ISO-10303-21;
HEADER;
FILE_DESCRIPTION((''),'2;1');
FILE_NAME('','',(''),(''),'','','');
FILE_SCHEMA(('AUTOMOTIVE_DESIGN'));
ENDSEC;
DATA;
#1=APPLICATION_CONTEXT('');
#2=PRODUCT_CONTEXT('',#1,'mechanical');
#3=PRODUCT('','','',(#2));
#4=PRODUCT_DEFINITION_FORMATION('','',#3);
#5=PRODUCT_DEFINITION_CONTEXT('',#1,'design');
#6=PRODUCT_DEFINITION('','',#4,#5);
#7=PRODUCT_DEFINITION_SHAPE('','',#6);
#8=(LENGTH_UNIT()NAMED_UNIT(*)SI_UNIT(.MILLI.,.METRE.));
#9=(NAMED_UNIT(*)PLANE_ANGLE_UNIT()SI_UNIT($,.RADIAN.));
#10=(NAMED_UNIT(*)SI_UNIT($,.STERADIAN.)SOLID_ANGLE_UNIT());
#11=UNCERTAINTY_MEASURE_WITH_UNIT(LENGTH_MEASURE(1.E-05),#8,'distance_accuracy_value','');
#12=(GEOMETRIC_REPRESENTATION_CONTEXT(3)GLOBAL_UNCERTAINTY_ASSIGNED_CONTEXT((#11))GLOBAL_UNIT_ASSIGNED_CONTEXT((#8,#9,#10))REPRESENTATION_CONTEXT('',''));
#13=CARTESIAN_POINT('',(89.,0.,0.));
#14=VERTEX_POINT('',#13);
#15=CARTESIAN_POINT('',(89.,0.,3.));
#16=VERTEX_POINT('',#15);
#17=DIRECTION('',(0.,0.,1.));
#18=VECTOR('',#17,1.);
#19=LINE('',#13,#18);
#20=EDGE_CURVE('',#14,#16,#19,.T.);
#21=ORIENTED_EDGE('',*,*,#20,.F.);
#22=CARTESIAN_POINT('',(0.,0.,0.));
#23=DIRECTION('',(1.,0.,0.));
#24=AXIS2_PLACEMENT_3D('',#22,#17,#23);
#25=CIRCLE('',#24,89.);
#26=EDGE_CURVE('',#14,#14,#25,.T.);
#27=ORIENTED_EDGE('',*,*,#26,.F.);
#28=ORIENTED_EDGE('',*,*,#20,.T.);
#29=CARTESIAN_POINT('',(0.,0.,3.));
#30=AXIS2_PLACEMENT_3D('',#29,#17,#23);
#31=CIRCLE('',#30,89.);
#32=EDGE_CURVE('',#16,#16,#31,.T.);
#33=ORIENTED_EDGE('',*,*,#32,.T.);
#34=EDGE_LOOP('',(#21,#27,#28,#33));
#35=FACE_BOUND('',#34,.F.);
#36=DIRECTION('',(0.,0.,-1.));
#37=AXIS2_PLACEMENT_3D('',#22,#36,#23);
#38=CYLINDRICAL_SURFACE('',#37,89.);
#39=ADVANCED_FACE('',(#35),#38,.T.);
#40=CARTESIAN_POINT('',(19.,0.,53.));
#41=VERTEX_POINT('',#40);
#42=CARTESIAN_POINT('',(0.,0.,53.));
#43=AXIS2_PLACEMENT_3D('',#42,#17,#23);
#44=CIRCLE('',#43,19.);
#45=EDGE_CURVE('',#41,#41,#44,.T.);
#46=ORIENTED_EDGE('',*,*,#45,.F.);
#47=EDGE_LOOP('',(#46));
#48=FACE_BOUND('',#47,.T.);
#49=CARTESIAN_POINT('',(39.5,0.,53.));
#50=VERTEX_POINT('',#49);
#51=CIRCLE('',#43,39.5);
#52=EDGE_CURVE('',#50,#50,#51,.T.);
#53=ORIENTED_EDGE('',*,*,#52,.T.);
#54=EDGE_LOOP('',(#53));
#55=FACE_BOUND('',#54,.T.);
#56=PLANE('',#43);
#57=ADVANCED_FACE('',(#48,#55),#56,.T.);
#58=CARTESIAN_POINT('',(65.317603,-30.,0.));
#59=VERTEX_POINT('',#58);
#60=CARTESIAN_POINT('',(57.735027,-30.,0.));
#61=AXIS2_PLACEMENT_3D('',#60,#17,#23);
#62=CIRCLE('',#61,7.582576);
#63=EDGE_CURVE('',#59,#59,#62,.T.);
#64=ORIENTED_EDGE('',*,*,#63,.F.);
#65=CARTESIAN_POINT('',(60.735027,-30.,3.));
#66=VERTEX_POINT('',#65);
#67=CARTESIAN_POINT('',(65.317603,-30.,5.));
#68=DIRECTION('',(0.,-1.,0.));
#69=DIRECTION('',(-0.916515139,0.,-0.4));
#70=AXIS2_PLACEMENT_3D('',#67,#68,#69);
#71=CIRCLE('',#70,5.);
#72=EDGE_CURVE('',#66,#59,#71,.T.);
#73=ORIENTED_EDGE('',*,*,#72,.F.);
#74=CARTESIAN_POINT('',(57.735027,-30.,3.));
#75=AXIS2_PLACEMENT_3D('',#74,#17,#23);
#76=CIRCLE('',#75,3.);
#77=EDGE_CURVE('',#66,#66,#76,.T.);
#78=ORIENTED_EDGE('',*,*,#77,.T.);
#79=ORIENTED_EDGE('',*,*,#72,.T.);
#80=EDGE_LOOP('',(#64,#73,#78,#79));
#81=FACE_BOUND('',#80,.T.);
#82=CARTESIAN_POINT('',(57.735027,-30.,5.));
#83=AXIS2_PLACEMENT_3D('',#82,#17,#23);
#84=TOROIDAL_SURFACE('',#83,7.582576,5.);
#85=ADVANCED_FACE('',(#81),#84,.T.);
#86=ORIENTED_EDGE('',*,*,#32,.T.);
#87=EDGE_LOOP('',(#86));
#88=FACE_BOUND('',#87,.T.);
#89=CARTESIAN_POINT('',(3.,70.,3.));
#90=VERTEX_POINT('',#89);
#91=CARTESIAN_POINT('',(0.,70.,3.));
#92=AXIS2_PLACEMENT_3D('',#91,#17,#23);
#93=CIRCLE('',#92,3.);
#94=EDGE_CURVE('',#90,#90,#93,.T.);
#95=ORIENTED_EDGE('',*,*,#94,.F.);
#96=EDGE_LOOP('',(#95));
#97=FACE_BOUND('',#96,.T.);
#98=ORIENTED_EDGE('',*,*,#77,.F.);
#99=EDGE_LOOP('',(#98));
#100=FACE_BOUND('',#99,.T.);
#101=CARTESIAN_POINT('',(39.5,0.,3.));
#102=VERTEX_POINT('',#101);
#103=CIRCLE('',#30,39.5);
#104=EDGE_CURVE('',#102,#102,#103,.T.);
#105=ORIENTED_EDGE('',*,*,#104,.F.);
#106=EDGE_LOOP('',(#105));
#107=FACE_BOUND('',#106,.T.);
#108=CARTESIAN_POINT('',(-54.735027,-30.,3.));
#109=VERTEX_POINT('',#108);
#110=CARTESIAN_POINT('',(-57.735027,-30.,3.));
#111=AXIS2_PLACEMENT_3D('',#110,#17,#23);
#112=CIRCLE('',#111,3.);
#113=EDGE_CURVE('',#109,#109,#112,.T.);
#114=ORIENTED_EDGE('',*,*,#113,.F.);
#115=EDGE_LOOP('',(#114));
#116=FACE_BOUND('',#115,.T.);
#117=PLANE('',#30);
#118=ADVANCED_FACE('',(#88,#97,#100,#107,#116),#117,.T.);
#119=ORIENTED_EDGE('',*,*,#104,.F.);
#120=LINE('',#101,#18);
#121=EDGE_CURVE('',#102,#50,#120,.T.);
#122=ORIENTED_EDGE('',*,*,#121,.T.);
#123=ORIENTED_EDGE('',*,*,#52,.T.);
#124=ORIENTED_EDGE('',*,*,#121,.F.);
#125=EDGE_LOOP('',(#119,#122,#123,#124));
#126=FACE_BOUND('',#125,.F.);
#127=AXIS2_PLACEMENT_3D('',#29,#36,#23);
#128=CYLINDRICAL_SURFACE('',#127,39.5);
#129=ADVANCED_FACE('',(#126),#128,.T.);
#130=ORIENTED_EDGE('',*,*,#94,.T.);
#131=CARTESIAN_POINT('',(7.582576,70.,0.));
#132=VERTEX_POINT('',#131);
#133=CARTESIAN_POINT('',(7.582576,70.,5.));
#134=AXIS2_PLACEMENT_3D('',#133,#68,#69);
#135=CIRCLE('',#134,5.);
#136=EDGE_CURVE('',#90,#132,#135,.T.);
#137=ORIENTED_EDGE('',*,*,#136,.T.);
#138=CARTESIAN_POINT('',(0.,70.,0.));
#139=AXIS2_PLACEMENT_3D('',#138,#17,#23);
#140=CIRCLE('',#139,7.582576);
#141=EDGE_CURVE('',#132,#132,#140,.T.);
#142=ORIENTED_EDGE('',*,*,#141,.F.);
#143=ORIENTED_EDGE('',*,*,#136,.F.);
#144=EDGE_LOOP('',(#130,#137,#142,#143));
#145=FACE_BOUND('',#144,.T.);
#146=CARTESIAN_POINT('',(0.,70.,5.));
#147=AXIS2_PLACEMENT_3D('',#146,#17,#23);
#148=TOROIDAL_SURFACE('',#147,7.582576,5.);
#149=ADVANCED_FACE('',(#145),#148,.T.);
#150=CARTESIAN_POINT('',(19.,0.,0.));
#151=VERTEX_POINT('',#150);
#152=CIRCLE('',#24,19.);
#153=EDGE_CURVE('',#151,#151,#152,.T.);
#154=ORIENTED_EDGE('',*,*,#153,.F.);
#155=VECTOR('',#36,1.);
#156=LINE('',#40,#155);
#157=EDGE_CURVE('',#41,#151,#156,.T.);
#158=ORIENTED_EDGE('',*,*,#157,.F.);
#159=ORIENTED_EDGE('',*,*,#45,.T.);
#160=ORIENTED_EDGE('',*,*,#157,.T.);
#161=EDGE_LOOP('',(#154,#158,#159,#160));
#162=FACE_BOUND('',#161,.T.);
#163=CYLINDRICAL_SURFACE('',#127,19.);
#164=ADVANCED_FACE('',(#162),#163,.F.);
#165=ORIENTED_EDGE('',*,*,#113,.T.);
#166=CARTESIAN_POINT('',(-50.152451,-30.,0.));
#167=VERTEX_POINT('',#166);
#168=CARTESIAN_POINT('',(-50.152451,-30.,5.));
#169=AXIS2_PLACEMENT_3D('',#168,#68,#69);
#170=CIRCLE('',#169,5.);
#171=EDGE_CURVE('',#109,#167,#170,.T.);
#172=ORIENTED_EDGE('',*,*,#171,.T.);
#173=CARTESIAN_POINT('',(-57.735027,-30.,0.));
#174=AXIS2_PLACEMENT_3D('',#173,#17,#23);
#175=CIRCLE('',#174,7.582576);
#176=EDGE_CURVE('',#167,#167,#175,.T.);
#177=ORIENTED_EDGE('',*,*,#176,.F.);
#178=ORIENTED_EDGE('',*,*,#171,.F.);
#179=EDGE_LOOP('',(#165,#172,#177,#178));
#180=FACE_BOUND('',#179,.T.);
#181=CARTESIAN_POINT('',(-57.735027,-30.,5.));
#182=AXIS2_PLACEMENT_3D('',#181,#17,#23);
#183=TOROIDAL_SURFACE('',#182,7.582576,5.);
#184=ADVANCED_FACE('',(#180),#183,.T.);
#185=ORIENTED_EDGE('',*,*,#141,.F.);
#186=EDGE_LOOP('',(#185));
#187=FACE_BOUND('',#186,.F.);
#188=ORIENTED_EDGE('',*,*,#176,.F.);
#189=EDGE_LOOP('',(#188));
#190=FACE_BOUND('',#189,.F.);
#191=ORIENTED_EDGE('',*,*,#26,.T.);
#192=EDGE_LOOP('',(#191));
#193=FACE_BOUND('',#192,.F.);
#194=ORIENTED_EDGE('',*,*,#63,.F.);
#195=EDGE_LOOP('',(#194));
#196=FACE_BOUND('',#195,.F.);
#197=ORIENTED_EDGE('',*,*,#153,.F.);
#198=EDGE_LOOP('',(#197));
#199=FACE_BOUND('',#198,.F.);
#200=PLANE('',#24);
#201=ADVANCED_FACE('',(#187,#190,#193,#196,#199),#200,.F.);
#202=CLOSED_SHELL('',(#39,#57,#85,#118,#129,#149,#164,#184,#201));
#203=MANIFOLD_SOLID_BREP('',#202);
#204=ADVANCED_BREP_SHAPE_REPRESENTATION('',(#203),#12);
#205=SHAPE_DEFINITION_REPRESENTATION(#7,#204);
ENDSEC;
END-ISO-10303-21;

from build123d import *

# Parameters (mm, degrees)
F0_R     = 89
F0_R_2   = 3
F0_R_3   = 19
F1_DEPTH = 3
F2_R     = 39.5
F2_R_2   = 19
F3_DEPTH = 50


# Not quite as in the source:
# - a fillet or chamfer that OpenCascade refuses, or shapes differently, is made with other operations: its cross-section is extruded or revolved along the edge and cut away or added


with BuildPart() as f1:
    # F0 (on Top) → F1 (new body)
    with BuildSketch(Plane.XY):
        Circle(F0_R)
        with Locations((-57.735026919, -30)):
            Circle(F0_R_2, mode=Mode.SUBTRACT)
        with Locations((57.735026919, -30)):
            Circle(F0_R_2, mode=Mode.SUBTRACT)
        Circle(F0_R_3, mode=Mode.SUBTRACT)
        with Locations((0, 70)):
            Circle(F0_R_2, mode=Mode.SUBTRACT)
    extrude(amount=F1_DEPTH)

    # F2 (on face) → F3 (join)
    with BuildSketch(Plane.XY.offset(3)):
        Circle(F2_R)
        Circle(F2_R_2, mode=Mode.SUBTRACT)
    extrude(amount=F3_DEPTH)

    # F4: fillet of radius 5 on 3 edges, made by hand

    # F4_s1 → F4_t2 (revolve, cut)
    with BuildSketch(Plane.XZ.offset(30)):
        with BuildLine():
            ThreePointArc((60.735026919, 3), (62.5789898264, 0.8166998673), (65.3176026139, 0))
            Line((65.3176026139, 0), (60.735026919, 0))
            Line((60.735026919, 0), (60.735026919, 3))
        make_face()
    revolve(axis=Axis((57.735026919, -30, 0), (0, 0, 1)), mode=Mode.SUBTRACT)

    # F4_s3 → F4_t4 (revolve, cut)
    with BuildSketch(Plane.XZ.offset(-70)):
        with BuildLine():
            ThreePointArc((3, 3), (4.8439629074, 0.8166998673), (7.582575695, 0))
            Line((7.582575695, 0), (3, 0))
            Line((3, 0), (3, 3))
        make_face()
    revolve(axis=Axis((0, 70, 0), (0, 0, 1)), mode=Mode.SUBTRACT)

    # F4_s5 → F4_t6 (revolve, cut)
    with BuildSketch(Plane.XZ.offset(30)):
        with BuildLine():
            ThreePointArc((-54.735026919, 3), (-52.8910640115, 0.8166998673), (-50.152451224, 0))
            Line((-50.152451224, 0), (-54.735026919, 0))
            Line((-54.735026919, 0), (-54.735026919, 3))
        make_face()
    revolve(axis=Axis((-57.735026919, -30, 0), (0, 0, 1)), mode=Mode.SUBTRACT)


solid = f1.part
